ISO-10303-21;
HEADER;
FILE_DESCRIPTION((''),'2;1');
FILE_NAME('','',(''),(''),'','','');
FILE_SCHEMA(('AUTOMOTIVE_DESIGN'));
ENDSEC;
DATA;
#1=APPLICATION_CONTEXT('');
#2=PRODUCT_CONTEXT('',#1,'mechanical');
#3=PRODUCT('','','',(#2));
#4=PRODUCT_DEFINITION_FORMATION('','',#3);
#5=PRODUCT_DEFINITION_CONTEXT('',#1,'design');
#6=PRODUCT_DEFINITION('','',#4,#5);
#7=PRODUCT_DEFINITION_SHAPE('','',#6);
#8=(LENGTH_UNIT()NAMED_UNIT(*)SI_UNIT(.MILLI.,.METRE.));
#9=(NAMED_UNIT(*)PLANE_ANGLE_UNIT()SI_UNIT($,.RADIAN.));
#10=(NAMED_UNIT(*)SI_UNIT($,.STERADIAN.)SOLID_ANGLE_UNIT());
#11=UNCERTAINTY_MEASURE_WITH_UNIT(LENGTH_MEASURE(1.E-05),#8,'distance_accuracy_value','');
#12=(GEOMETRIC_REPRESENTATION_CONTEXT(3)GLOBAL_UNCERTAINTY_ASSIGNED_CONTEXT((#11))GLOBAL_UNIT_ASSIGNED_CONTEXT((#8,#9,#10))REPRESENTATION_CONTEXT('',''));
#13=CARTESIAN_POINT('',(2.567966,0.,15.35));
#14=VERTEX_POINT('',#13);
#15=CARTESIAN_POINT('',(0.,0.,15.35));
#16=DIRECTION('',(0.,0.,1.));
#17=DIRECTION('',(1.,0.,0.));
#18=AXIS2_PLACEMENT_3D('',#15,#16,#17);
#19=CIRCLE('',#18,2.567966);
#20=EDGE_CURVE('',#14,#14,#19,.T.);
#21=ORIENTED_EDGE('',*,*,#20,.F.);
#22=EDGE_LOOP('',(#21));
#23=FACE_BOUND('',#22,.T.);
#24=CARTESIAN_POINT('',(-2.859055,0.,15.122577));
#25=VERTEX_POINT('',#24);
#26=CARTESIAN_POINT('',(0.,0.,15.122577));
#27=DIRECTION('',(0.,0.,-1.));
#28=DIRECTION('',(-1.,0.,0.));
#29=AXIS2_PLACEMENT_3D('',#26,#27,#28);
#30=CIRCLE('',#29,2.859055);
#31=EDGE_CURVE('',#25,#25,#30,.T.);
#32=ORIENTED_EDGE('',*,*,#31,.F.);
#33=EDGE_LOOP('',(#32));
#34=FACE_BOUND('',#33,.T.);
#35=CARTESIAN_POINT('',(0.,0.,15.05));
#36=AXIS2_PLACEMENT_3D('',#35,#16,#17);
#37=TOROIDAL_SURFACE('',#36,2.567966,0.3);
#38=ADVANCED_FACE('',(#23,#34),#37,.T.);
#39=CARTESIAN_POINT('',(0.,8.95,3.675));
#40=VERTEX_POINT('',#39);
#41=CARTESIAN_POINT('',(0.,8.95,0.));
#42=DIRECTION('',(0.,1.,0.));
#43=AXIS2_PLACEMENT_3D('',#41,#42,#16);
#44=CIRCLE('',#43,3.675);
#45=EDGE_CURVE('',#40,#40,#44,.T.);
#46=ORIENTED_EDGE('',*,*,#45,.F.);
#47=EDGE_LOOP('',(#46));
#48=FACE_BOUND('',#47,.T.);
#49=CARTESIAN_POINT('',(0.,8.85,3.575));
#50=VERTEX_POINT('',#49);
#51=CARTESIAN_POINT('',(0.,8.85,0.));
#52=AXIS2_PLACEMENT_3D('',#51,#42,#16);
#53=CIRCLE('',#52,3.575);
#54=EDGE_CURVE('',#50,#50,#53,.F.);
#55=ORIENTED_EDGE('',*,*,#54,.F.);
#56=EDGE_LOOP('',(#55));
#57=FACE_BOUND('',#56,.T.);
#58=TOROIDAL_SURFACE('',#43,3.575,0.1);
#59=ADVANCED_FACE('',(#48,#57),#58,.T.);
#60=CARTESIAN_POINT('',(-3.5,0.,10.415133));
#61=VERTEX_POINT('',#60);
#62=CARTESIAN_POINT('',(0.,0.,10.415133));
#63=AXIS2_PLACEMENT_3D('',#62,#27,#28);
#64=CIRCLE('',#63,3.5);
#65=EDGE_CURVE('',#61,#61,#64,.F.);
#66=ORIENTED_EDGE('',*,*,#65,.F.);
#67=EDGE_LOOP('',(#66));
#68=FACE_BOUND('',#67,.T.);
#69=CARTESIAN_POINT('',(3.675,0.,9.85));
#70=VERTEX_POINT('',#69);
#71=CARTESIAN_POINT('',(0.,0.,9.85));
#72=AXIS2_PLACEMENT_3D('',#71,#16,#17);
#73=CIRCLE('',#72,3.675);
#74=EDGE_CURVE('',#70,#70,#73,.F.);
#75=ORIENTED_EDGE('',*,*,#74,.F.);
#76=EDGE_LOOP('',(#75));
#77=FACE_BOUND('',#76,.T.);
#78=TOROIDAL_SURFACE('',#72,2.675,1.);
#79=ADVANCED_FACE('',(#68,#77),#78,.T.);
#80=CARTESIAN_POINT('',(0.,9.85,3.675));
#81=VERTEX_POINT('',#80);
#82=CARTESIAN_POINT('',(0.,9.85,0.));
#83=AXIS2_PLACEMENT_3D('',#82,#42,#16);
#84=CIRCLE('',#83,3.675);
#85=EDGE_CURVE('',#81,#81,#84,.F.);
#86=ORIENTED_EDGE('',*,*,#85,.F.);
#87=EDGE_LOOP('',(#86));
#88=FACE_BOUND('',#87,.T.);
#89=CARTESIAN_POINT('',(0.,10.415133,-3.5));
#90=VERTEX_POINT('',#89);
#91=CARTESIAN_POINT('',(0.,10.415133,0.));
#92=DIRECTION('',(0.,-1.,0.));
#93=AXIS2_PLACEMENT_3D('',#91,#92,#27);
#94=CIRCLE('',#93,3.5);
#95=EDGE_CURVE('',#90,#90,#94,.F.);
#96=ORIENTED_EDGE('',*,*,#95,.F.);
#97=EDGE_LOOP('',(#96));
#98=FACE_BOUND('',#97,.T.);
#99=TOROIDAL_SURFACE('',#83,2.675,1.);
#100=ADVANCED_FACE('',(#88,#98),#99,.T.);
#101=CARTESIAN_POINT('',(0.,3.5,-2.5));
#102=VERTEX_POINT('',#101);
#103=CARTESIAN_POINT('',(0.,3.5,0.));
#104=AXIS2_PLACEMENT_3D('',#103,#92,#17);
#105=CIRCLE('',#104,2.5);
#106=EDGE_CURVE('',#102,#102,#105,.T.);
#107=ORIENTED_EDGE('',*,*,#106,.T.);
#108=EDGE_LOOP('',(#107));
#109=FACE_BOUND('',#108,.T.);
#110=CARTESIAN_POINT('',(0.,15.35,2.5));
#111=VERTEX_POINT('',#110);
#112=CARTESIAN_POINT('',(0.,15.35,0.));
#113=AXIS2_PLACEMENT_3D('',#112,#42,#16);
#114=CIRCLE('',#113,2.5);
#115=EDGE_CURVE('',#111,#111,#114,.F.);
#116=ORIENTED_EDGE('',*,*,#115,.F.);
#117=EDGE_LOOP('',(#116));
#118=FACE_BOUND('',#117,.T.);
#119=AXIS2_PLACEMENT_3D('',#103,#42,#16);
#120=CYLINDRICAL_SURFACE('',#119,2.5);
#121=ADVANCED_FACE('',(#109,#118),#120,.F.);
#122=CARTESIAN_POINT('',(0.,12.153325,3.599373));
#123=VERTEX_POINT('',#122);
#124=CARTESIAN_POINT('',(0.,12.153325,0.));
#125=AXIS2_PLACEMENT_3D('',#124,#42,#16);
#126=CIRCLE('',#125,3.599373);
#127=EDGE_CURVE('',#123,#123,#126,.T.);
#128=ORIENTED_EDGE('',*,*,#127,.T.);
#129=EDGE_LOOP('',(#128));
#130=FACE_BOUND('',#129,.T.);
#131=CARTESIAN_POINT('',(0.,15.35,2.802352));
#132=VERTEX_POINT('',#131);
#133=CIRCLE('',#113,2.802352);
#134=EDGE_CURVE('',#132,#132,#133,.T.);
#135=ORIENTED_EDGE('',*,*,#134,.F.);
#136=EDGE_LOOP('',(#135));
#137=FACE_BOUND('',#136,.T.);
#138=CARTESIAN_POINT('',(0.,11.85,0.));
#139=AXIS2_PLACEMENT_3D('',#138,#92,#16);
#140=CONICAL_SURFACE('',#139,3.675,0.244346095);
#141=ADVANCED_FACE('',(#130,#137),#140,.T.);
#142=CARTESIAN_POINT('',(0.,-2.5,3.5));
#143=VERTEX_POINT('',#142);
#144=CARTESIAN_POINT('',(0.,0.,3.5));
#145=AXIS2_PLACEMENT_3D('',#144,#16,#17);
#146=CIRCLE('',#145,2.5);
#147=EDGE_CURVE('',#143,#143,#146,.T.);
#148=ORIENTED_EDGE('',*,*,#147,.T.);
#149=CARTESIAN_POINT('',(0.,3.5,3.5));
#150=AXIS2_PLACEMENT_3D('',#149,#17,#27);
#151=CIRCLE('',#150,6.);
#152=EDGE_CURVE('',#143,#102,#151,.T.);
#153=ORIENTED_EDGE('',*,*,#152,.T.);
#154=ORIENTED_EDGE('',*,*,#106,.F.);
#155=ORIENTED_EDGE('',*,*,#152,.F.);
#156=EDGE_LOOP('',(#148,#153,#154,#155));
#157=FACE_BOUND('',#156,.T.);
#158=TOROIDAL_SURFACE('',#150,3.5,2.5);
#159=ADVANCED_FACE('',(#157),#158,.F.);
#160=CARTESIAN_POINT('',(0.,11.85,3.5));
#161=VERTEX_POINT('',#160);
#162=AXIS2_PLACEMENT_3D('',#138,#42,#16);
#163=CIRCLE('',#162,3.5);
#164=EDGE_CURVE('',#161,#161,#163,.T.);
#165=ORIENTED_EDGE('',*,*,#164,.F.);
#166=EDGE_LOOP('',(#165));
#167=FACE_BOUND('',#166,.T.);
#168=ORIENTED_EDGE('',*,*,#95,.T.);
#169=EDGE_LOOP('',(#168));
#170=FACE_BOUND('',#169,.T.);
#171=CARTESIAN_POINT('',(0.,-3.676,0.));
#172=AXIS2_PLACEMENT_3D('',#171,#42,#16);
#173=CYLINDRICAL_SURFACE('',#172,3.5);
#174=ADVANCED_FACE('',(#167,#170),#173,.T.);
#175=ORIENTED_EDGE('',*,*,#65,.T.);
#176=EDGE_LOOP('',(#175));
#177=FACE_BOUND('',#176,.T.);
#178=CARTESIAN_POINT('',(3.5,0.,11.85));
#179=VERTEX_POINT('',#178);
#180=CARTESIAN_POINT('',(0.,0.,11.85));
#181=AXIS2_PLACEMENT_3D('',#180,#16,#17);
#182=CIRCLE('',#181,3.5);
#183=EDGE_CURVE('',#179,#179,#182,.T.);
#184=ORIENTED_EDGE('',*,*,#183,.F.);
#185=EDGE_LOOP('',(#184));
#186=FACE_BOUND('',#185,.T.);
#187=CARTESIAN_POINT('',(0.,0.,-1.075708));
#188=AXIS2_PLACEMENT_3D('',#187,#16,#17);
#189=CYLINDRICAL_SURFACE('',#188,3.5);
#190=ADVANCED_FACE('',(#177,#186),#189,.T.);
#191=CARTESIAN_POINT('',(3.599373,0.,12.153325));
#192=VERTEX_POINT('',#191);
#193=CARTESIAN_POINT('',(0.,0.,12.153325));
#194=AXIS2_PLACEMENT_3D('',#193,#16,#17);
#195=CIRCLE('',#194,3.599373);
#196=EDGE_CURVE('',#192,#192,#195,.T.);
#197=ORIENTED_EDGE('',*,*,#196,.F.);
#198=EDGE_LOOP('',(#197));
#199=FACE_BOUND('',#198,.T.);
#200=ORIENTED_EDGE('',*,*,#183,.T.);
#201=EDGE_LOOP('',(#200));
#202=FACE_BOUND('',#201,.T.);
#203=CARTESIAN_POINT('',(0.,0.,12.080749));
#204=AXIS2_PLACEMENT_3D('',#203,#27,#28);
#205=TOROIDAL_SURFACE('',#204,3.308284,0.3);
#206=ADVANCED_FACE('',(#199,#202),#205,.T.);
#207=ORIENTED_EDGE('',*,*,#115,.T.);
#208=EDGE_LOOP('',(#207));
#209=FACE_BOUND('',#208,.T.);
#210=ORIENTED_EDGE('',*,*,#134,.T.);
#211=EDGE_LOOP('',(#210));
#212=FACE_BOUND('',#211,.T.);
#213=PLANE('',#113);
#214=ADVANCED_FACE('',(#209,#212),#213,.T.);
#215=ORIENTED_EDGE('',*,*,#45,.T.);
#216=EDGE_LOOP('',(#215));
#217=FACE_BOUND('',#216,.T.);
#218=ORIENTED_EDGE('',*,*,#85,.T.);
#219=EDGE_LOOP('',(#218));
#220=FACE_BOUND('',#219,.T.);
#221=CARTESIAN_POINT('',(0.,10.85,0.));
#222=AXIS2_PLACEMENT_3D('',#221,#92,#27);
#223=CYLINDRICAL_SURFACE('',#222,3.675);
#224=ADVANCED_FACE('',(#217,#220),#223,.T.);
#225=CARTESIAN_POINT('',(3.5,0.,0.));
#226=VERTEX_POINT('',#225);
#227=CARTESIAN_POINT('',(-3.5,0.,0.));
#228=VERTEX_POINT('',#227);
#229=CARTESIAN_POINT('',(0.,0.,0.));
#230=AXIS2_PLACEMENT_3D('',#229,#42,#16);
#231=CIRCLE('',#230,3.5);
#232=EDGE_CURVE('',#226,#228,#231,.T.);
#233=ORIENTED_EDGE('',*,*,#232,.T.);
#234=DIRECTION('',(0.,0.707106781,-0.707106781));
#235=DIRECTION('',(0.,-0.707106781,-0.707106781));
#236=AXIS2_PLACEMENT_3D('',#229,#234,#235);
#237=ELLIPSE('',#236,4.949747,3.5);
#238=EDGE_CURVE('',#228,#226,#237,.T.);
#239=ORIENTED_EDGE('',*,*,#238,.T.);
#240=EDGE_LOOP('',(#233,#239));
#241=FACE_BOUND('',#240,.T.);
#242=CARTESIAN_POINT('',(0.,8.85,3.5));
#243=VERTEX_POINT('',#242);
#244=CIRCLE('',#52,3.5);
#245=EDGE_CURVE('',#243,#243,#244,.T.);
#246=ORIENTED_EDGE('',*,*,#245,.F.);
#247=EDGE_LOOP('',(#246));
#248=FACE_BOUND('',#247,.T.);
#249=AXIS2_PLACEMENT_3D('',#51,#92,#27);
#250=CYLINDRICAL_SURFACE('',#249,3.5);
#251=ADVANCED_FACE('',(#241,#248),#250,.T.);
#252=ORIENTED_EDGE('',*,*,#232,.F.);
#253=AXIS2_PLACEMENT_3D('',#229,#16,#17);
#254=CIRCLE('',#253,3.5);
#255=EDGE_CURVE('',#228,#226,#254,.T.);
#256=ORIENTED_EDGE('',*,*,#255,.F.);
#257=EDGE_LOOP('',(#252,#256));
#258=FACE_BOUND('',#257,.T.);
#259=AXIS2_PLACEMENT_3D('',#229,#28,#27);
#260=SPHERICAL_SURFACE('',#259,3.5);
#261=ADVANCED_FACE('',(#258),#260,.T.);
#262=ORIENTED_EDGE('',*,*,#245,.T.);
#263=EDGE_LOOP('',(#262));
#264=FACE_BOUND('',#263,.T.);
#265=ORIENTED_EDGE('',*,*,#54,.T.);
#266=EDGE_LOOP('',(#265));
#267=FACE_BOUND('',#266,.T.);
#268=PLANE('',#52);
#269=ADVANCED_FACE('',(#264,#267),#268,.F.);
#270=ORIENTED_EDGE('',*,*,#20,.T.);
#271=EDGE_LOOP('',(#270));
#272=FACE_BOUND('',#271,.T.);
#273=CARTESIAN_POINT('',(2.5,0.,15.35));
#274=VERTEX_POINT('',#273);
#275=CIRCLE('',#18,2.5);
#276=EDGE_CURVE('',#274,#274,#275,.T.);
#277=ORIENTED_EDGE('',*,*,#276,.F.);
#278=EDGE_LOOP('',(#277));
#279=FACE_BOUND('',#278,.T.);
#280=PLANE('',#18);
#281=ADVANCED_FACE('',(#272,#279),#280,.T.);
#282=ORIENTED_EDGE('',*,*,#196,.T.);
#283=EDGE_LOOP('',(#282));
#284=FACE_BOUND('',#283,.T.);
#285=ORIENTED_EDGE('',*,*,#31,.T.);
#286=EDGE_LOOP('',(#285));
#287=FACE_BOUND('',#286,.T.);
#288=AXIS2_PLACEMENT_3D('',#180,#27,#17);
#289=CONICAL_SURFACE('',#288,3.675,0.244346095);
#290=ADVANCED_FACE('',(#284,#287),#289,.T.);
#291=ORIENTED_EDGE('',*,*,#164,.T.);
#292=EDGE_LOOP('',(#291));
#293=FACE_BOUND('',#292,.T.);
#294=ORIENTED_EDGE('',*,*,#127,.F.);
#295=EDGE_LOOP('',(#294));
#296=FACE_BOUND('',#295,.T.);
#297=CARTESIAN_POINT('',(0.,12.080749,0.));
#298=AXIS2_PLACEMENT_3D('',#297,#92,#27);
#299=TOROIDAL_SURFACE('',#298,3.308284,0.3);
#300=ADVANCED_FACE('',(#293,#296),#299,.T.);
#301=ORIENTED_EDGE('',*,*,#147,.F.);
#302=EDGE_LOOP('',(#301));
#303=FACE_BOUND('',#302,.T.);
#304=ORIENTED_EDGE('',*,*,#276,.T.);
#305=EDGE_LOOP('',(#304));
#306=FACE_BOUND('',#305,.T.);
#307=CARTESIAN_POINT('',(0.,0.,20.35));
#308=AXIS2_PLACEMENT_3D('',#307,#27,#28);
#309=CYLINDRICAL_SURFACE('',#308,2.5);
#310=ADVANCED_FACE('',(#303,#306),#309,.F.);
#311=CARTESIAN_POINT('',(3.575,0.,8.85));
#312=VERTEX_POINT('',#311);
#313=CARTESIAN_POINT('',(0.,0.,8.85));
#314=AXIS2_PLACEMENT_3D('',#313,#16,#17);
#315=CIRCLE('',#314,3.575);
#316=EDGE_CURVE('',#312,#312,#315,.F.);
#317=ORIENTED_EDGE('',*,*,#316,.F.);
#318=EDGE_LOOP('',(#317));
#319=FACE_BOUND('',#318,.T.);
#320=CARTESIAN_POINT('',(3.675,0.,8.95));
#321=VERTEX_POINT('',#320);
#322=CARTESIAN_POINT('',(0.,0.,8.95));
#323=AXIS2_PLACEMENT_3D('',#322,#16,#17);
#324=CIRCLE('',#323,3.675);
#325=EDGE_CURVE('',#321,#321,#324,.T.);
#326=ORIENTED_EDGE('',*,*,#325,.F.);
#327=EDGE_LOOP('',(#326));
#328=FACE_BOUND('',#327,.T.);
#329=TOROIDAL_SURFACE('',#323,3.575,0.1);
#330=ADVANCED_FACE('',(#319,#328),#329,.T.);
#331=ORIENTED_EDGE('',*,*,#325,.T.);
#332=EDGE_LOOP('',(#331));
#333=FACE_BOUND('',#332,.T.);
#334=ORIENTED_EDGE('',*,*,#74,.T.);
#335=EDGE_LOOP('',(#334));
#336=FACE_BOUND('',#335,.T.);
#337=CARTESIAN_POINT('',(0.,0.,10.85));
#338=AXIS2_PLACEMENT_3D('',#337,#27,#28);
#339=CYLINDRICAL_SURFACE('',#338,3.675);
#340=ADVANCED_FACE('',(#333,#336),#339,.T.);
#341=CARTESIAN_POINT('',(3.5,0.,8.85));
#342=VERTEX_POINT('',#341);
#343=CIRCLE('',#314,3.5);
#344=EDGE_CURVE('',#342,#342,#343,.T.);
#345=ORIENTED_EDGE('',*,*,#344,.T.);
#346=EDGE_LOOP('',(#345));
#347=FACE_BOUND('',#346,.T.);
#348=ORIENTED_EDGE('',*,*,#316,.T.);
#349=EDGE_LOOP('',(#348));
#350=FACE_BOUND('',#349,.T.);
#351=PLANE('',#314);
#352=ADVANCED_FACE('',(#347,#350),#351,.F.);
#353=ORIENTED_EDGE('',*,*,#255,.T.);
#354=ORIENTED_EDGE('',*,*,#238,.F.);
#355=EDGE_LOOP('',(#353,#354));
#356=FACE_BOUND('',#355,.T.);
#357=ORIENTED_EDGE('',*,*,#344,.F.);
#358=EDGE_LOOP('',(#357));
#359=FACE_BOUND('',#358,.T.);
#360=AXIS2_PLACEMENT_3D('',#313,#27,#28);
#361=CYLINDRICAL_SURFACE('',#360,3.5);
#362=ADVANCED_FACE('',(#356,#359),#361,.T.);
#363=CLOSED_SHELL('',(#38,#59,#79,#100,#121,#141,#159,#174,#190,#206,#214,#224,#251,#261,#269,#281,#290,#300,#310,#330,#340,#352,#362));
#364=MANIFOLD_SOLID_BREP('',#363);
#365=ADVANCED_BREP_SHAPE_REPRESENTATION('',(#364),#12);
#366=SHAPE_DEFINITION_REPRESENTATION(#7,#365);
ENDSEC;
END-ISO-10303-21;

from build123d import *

# Parameters (mm, degrees)
SKETCH1_R                       = 3.5
BOSS_EXTRUDE1_DEPTH             = 8.85
SKETCH2_R                       = 3.675
BOSS_EXTRUDE2_DEPTH             = 2
FILLET1_R                       = 1
SKETCH4_R                       = 3.5
BOSS_EXTRUDE3_DEPTH             = 1
BOSS_EXTRUDE3_DIRECTION_2_REACH = 14.031
SKETCH5_R                       = 3.675
BOSS_EXTRUDE4_DEPTH             = 3.5
BOSS_EXTRUDE4_TAPER             = 14
FILLET2_R                       = 0.3
FILLET3_R                       = 0.1
SKETCH7_R                       = 3.5
BOSS_EXTRUDE5_DEPTH             = 8.85
SKETCH8_R                       = 3.675
BOSS_EXTRUDE6_DEPTH             = 2
FILLET4_R                       = 1
SKETCH9_R                       = 3.5
BOSS_EXTRUDE7_DEPTH             = 1
BOSS_EXTRUDE7_DIRECTION_2_REACH = 23.45
SKETCH10_R                      = 3.675
BOSS_EXTRUDE8_DEPTH             = 3.5
BOSS_EXTRUDE8_TAPER             = 14
REVOLVE1_ANGLE                  = 90
FILLET5_R                       = 0.3
FILLET6_R                       = 0.1
SKETCH13_R                      = 2.5


with BuildPart() as part:
    # Sketch1 → Boss-Extrude1 (new body)
    with BuildSketch(Plane.XY):
        Circle(SKETCH1_R)
    extrude(amount=BOSS_EXTRUDE1_DEPTH)

    # Sketch2 → Boss-Extrude2 (add)
    with BuildSketch(Plane.XY.offset(8.85)):
        Circle(SKETCH2_R)
    extrude(amount=BOSS_EXTRUDE2_DEPTH)

    # Fillet1
    fillet1_edges = [part.edges().sort_by_distance(p)[0] for p in [
        (-3.675, 0, 10.85),
    ]]
    fillet(fillet1_edges, radius=FILLET1_R)

    # Sketch4 → Boss-Extrude3 (add)
    with BuildSketch(Plane.XY.offset(10.85)):
        Circle(SKETCH4_R)
    extrude(amount=BOSS_EXTRUDE3_DEPTH)

    # Sketch4 → Boss-Extrude3 direction 2 (add, up to next)
    with BuildSketch(Plane.XY.offset(10.85), mode=Mode.PRIVATE) as boss_extrude3_direction_2_sk1:
        Circle(SKETCH4_R)
    boss_extrude3_direction_2_tool1 = extrude(boss_extrude3_direction_2_sk1.sketch, amount=-BOSS_EXTRUDE3_DIRECTION_2_REACH, mode=Mode.PRIVATE) - part.part
    add(boss_extrude3_direction_2_tool1.solids().sort_by_distance((0, 0, 10.85))[0])

    # Sketch5 → Boss-Extrude4 (add)
    with BuildSketch(Plane.XY.offset(11.85)):
        Circle(SKETCH5_R)
    extrude(amount=BOSS_EXTRUDE4_DEPTH, taper=BOSS_EXTRUDE4_TAPER)

    # Fillet2
    # the kernel refuses this fillet: 0.3 mm, written as the material it takes off along each edge
    with BuildSketch(Plane(origin=(0, 0, 11.85), x_dir=(1, 0, 0), z_dir=(0, 1, 0))) as fillet2_piece_1:
        with BuildLine():
            CenterArc((3.308283827, -0.230748584), FILLET2_R, 346, 64.278692047)
            Line((3.599372545, -0.303325153), (3.60519432, -0.304776684))
            Line((3.60519432, -0.304776684), (3.680821774, -0.001451531))
            Line((3.680821774, -0.001451531), (3.675, 0.006))
            ThreePointArc((3.675, 0.006), (3.5875, 0.006), (3.503834323, 0.004614972))
            Line((3.503834323, 0.004614972), (3.5, 0))
        make_face()
    revolve(axis=Axis((0, 0, 11.85), (0, 0, -1)), mode=Mode.SUBTRACT)
    with BuildSketch(Plane(origin=(0, 0, 15.35), x_dir=(1, 0, 0), z_dir=(0, 1, 0))) as fillet2_piece_2:
        with BuildLine():
            CenterArc((2.80235199 - FILLET2_R * 0.781285626507, FILLET2_R), FILLET2_R, 270, 76)
            Line((2.80235199 - FILLET2_R * 0.781285626507, 0), (2.80235199 - FILLET2_R * 0.781285626507, -FILLET2_R * 0.02))
            Line((2.80235199 - FILLET2_R * 0.781285626507, -FILLET2_R * 0.02), (2.80235199 + FILLET2_R * 0.0156257125301, -FILLET2_R * 0.02))
            Line((2.80235199 + FILLET2_R * 0.0156257125301, -FILLET2_R * 0.02), (2.80235199 + FILLET2_R * 0.208416014295, FILLET2_R * 0.753239666488))
            Line((2.80235199 + FILLET2_R * 0.208416014295, FILLET2_R * 0.753239666488), (2.80235199 + FILLET2_R * 0.189010099769, FILLET2_R * 0.7580781044))
        make_face()
    revolve(axis=Axis((0, 0, 15.35), (0, 0, -1)), mode=Mode.SUBTRACT)

    # Fillet3
    fillet3_edges = [part.edges().sort_by_distance(p)[0] for p in [
        (-3.675, 0, 8.85),
    ]]
    fillet(fillet3_edges, radius=FILLET3_R)

    # Sketch7 → Boss-Extrude5 (add)
    with BuildSketch(Plane(origin=(0, 0, 0), x_dir=(1, 0, 0), z_dir=(0, 1, 0))):
        with Locations(Location((0, 0, 0), (0, 0, 180))):
            Circle(SKETCH7_R)
    extrude(amount=BOSS_EXTRUDE5_DEPTH)

    # Sketch8 → Boss-Extrude6 (add)
    with BuildSketch(Plane(origin=(0, 8.85, 0), x_dir=(1, 0, 0), z_dir=(0, 1, 0))):
        with Locations(Location((0, 0, 0), (0, 0, 270))):
            Circle(SKETCH8_R)
    extrude(amount=BOSS_EXTRUDE6_DEPTH)

    # Fillet4
    fillet4_edges = [part.edges().sort_by_distance(p)[0] for p in [
        (0, 10.85, -3.675),
    ]]
    fillet(fillet4_edges, radius=FILLET4_R)

    # Sketch9 → Boss-Extrude7 (add)
    with BuildSketch(Plane(origin=(0, 10.85, 0), x_dir=(1, 0, 0), z_dir=(0, 1, 0))):
        with Locations(Location((0, 0, 0), (0, 0, 180))):
            Circle(SKETCH9_R)
    extrude(amount=BOSS_EXTRUDE7_DEPTH)

    # Sketch9 → Boss-Extrude7 direction 2 (add, up to next)
    with BuildSketch(Plane(origin=(0, 10.85, 0), x_dir=(1, 0, 0), z_dir=(0, 1, 0)), mode=Mode.PRIVATE) as boss_extrude7_direction_2_sk1:
        with Locations(Location((0, 0, 0), (0, 0, 180))):
            Circle(SKETCH9_R)
    boss_extrude7_direction_2_tool1 = extrude(boss_extrude7_direction_2_sk1.sketch, amount=-BOSS_EXTRUDE7_DIRECTION_2_REACH, mode=Mode.PRIVATE) - part.part
    add(boss_extrude7_direction_2_tool1.solids().sort_by_distance((0, 10.85, 0))[0])

    # Sketch10 → Boss-Extrude8 (add)
    with BuildSketch(Plane(origin=(0, 11.85, 0), x_dir=(1, 0, 0), z_dir=(0, 1, 0))):
        with Locations(Location((0, 0, 0), (0, 0, 270))):
            Circle(SKETCH10_R)
    extrude(amount=BOSS_EXTRUDE8_DEPTH, taper=BOSS_EXTRUDE8_TAPER)

    # Sketch15 → Revolve1 (revolve)
    with BuildSketch(Plane(origin=(0, 0, 0), x_dir=(-1, 0, 0), z_dir=(0, 0, -1))):
        with BuildLine():
            Line((-3.5, 0), (3.5, 0))
            ThreePointArc((3.5, 0), (0, -3.5), (-3.5, 0))
        make_face()
    revolve(axis=Axis((3.5, 0, 0), (1, 0, 0)), revolution_arc=REVOLVE1_ANGLE)

    # Fillet5
    # the kernel refuses this fillet: 0.3 mm, written as the material it takes off along each edge
    with BuildSketch(Plane(origin=(0, 11.85, 0), x_dir=(0, 0, 1), z_dir=(-1, 0, 0))) as fillet5_piece_1:
        with BuildLine():
            CenterArc((3.308283827, 0.230748584), FILLET5_R, 309.721307953, 64.278692047)
            Line((3.5, 0), (3.503834323, -0.004614972))
            ThreePointArc((3.503834323, -0.004614972), (3.5875, -0.006), (3.675, -0.006))
            Line((3.675, -0.006), (3.680821774, 0.001451531))
            Line((3.680821774, 0.001451531), (3.60519432, 0.304776684))
            Line((3.60519432, 0.304776684), (3.599372545, 0.303325153))
        make_face()
    revolve(axis=Axis((0, 11.85, 0), (0, 1, 0)), mode=Mode.SUBTRACT)

    # Fillet6
    fillet6_edges = [part.edges().sort_by_distance(p)[0] for p in [
        (0, 8.85, -3.675),
    ]]
    fillet(fillet6_edges, radius=FILLET6_R)

    # Cut-Sweep2: sweep along a path in Sketch19
    with BuildLine(Plane(origin=(0, 0, 0), x_dir=(0, 0, -1), z_dir=(1, 0, 0))) as cut_sweep2_path:
        Line((-15.35, 0), (-3.5, 0))
        ThreePointArc((-3.5, 0), (-1.025126266, 1.025126266), (0, 3.5))
        Line((0, 3.5), (0, 16.174677612))
    # Sketch13 → Cut-Sweep2 (sweep, cut)
    with BuildSketch(Plane.XY.offset(15.35)):
        Circle(SKETCH13_R)
    sweep(path=cut_sweep2_path.line, mode=Mode.SUBTRACT)


solid = part.part
